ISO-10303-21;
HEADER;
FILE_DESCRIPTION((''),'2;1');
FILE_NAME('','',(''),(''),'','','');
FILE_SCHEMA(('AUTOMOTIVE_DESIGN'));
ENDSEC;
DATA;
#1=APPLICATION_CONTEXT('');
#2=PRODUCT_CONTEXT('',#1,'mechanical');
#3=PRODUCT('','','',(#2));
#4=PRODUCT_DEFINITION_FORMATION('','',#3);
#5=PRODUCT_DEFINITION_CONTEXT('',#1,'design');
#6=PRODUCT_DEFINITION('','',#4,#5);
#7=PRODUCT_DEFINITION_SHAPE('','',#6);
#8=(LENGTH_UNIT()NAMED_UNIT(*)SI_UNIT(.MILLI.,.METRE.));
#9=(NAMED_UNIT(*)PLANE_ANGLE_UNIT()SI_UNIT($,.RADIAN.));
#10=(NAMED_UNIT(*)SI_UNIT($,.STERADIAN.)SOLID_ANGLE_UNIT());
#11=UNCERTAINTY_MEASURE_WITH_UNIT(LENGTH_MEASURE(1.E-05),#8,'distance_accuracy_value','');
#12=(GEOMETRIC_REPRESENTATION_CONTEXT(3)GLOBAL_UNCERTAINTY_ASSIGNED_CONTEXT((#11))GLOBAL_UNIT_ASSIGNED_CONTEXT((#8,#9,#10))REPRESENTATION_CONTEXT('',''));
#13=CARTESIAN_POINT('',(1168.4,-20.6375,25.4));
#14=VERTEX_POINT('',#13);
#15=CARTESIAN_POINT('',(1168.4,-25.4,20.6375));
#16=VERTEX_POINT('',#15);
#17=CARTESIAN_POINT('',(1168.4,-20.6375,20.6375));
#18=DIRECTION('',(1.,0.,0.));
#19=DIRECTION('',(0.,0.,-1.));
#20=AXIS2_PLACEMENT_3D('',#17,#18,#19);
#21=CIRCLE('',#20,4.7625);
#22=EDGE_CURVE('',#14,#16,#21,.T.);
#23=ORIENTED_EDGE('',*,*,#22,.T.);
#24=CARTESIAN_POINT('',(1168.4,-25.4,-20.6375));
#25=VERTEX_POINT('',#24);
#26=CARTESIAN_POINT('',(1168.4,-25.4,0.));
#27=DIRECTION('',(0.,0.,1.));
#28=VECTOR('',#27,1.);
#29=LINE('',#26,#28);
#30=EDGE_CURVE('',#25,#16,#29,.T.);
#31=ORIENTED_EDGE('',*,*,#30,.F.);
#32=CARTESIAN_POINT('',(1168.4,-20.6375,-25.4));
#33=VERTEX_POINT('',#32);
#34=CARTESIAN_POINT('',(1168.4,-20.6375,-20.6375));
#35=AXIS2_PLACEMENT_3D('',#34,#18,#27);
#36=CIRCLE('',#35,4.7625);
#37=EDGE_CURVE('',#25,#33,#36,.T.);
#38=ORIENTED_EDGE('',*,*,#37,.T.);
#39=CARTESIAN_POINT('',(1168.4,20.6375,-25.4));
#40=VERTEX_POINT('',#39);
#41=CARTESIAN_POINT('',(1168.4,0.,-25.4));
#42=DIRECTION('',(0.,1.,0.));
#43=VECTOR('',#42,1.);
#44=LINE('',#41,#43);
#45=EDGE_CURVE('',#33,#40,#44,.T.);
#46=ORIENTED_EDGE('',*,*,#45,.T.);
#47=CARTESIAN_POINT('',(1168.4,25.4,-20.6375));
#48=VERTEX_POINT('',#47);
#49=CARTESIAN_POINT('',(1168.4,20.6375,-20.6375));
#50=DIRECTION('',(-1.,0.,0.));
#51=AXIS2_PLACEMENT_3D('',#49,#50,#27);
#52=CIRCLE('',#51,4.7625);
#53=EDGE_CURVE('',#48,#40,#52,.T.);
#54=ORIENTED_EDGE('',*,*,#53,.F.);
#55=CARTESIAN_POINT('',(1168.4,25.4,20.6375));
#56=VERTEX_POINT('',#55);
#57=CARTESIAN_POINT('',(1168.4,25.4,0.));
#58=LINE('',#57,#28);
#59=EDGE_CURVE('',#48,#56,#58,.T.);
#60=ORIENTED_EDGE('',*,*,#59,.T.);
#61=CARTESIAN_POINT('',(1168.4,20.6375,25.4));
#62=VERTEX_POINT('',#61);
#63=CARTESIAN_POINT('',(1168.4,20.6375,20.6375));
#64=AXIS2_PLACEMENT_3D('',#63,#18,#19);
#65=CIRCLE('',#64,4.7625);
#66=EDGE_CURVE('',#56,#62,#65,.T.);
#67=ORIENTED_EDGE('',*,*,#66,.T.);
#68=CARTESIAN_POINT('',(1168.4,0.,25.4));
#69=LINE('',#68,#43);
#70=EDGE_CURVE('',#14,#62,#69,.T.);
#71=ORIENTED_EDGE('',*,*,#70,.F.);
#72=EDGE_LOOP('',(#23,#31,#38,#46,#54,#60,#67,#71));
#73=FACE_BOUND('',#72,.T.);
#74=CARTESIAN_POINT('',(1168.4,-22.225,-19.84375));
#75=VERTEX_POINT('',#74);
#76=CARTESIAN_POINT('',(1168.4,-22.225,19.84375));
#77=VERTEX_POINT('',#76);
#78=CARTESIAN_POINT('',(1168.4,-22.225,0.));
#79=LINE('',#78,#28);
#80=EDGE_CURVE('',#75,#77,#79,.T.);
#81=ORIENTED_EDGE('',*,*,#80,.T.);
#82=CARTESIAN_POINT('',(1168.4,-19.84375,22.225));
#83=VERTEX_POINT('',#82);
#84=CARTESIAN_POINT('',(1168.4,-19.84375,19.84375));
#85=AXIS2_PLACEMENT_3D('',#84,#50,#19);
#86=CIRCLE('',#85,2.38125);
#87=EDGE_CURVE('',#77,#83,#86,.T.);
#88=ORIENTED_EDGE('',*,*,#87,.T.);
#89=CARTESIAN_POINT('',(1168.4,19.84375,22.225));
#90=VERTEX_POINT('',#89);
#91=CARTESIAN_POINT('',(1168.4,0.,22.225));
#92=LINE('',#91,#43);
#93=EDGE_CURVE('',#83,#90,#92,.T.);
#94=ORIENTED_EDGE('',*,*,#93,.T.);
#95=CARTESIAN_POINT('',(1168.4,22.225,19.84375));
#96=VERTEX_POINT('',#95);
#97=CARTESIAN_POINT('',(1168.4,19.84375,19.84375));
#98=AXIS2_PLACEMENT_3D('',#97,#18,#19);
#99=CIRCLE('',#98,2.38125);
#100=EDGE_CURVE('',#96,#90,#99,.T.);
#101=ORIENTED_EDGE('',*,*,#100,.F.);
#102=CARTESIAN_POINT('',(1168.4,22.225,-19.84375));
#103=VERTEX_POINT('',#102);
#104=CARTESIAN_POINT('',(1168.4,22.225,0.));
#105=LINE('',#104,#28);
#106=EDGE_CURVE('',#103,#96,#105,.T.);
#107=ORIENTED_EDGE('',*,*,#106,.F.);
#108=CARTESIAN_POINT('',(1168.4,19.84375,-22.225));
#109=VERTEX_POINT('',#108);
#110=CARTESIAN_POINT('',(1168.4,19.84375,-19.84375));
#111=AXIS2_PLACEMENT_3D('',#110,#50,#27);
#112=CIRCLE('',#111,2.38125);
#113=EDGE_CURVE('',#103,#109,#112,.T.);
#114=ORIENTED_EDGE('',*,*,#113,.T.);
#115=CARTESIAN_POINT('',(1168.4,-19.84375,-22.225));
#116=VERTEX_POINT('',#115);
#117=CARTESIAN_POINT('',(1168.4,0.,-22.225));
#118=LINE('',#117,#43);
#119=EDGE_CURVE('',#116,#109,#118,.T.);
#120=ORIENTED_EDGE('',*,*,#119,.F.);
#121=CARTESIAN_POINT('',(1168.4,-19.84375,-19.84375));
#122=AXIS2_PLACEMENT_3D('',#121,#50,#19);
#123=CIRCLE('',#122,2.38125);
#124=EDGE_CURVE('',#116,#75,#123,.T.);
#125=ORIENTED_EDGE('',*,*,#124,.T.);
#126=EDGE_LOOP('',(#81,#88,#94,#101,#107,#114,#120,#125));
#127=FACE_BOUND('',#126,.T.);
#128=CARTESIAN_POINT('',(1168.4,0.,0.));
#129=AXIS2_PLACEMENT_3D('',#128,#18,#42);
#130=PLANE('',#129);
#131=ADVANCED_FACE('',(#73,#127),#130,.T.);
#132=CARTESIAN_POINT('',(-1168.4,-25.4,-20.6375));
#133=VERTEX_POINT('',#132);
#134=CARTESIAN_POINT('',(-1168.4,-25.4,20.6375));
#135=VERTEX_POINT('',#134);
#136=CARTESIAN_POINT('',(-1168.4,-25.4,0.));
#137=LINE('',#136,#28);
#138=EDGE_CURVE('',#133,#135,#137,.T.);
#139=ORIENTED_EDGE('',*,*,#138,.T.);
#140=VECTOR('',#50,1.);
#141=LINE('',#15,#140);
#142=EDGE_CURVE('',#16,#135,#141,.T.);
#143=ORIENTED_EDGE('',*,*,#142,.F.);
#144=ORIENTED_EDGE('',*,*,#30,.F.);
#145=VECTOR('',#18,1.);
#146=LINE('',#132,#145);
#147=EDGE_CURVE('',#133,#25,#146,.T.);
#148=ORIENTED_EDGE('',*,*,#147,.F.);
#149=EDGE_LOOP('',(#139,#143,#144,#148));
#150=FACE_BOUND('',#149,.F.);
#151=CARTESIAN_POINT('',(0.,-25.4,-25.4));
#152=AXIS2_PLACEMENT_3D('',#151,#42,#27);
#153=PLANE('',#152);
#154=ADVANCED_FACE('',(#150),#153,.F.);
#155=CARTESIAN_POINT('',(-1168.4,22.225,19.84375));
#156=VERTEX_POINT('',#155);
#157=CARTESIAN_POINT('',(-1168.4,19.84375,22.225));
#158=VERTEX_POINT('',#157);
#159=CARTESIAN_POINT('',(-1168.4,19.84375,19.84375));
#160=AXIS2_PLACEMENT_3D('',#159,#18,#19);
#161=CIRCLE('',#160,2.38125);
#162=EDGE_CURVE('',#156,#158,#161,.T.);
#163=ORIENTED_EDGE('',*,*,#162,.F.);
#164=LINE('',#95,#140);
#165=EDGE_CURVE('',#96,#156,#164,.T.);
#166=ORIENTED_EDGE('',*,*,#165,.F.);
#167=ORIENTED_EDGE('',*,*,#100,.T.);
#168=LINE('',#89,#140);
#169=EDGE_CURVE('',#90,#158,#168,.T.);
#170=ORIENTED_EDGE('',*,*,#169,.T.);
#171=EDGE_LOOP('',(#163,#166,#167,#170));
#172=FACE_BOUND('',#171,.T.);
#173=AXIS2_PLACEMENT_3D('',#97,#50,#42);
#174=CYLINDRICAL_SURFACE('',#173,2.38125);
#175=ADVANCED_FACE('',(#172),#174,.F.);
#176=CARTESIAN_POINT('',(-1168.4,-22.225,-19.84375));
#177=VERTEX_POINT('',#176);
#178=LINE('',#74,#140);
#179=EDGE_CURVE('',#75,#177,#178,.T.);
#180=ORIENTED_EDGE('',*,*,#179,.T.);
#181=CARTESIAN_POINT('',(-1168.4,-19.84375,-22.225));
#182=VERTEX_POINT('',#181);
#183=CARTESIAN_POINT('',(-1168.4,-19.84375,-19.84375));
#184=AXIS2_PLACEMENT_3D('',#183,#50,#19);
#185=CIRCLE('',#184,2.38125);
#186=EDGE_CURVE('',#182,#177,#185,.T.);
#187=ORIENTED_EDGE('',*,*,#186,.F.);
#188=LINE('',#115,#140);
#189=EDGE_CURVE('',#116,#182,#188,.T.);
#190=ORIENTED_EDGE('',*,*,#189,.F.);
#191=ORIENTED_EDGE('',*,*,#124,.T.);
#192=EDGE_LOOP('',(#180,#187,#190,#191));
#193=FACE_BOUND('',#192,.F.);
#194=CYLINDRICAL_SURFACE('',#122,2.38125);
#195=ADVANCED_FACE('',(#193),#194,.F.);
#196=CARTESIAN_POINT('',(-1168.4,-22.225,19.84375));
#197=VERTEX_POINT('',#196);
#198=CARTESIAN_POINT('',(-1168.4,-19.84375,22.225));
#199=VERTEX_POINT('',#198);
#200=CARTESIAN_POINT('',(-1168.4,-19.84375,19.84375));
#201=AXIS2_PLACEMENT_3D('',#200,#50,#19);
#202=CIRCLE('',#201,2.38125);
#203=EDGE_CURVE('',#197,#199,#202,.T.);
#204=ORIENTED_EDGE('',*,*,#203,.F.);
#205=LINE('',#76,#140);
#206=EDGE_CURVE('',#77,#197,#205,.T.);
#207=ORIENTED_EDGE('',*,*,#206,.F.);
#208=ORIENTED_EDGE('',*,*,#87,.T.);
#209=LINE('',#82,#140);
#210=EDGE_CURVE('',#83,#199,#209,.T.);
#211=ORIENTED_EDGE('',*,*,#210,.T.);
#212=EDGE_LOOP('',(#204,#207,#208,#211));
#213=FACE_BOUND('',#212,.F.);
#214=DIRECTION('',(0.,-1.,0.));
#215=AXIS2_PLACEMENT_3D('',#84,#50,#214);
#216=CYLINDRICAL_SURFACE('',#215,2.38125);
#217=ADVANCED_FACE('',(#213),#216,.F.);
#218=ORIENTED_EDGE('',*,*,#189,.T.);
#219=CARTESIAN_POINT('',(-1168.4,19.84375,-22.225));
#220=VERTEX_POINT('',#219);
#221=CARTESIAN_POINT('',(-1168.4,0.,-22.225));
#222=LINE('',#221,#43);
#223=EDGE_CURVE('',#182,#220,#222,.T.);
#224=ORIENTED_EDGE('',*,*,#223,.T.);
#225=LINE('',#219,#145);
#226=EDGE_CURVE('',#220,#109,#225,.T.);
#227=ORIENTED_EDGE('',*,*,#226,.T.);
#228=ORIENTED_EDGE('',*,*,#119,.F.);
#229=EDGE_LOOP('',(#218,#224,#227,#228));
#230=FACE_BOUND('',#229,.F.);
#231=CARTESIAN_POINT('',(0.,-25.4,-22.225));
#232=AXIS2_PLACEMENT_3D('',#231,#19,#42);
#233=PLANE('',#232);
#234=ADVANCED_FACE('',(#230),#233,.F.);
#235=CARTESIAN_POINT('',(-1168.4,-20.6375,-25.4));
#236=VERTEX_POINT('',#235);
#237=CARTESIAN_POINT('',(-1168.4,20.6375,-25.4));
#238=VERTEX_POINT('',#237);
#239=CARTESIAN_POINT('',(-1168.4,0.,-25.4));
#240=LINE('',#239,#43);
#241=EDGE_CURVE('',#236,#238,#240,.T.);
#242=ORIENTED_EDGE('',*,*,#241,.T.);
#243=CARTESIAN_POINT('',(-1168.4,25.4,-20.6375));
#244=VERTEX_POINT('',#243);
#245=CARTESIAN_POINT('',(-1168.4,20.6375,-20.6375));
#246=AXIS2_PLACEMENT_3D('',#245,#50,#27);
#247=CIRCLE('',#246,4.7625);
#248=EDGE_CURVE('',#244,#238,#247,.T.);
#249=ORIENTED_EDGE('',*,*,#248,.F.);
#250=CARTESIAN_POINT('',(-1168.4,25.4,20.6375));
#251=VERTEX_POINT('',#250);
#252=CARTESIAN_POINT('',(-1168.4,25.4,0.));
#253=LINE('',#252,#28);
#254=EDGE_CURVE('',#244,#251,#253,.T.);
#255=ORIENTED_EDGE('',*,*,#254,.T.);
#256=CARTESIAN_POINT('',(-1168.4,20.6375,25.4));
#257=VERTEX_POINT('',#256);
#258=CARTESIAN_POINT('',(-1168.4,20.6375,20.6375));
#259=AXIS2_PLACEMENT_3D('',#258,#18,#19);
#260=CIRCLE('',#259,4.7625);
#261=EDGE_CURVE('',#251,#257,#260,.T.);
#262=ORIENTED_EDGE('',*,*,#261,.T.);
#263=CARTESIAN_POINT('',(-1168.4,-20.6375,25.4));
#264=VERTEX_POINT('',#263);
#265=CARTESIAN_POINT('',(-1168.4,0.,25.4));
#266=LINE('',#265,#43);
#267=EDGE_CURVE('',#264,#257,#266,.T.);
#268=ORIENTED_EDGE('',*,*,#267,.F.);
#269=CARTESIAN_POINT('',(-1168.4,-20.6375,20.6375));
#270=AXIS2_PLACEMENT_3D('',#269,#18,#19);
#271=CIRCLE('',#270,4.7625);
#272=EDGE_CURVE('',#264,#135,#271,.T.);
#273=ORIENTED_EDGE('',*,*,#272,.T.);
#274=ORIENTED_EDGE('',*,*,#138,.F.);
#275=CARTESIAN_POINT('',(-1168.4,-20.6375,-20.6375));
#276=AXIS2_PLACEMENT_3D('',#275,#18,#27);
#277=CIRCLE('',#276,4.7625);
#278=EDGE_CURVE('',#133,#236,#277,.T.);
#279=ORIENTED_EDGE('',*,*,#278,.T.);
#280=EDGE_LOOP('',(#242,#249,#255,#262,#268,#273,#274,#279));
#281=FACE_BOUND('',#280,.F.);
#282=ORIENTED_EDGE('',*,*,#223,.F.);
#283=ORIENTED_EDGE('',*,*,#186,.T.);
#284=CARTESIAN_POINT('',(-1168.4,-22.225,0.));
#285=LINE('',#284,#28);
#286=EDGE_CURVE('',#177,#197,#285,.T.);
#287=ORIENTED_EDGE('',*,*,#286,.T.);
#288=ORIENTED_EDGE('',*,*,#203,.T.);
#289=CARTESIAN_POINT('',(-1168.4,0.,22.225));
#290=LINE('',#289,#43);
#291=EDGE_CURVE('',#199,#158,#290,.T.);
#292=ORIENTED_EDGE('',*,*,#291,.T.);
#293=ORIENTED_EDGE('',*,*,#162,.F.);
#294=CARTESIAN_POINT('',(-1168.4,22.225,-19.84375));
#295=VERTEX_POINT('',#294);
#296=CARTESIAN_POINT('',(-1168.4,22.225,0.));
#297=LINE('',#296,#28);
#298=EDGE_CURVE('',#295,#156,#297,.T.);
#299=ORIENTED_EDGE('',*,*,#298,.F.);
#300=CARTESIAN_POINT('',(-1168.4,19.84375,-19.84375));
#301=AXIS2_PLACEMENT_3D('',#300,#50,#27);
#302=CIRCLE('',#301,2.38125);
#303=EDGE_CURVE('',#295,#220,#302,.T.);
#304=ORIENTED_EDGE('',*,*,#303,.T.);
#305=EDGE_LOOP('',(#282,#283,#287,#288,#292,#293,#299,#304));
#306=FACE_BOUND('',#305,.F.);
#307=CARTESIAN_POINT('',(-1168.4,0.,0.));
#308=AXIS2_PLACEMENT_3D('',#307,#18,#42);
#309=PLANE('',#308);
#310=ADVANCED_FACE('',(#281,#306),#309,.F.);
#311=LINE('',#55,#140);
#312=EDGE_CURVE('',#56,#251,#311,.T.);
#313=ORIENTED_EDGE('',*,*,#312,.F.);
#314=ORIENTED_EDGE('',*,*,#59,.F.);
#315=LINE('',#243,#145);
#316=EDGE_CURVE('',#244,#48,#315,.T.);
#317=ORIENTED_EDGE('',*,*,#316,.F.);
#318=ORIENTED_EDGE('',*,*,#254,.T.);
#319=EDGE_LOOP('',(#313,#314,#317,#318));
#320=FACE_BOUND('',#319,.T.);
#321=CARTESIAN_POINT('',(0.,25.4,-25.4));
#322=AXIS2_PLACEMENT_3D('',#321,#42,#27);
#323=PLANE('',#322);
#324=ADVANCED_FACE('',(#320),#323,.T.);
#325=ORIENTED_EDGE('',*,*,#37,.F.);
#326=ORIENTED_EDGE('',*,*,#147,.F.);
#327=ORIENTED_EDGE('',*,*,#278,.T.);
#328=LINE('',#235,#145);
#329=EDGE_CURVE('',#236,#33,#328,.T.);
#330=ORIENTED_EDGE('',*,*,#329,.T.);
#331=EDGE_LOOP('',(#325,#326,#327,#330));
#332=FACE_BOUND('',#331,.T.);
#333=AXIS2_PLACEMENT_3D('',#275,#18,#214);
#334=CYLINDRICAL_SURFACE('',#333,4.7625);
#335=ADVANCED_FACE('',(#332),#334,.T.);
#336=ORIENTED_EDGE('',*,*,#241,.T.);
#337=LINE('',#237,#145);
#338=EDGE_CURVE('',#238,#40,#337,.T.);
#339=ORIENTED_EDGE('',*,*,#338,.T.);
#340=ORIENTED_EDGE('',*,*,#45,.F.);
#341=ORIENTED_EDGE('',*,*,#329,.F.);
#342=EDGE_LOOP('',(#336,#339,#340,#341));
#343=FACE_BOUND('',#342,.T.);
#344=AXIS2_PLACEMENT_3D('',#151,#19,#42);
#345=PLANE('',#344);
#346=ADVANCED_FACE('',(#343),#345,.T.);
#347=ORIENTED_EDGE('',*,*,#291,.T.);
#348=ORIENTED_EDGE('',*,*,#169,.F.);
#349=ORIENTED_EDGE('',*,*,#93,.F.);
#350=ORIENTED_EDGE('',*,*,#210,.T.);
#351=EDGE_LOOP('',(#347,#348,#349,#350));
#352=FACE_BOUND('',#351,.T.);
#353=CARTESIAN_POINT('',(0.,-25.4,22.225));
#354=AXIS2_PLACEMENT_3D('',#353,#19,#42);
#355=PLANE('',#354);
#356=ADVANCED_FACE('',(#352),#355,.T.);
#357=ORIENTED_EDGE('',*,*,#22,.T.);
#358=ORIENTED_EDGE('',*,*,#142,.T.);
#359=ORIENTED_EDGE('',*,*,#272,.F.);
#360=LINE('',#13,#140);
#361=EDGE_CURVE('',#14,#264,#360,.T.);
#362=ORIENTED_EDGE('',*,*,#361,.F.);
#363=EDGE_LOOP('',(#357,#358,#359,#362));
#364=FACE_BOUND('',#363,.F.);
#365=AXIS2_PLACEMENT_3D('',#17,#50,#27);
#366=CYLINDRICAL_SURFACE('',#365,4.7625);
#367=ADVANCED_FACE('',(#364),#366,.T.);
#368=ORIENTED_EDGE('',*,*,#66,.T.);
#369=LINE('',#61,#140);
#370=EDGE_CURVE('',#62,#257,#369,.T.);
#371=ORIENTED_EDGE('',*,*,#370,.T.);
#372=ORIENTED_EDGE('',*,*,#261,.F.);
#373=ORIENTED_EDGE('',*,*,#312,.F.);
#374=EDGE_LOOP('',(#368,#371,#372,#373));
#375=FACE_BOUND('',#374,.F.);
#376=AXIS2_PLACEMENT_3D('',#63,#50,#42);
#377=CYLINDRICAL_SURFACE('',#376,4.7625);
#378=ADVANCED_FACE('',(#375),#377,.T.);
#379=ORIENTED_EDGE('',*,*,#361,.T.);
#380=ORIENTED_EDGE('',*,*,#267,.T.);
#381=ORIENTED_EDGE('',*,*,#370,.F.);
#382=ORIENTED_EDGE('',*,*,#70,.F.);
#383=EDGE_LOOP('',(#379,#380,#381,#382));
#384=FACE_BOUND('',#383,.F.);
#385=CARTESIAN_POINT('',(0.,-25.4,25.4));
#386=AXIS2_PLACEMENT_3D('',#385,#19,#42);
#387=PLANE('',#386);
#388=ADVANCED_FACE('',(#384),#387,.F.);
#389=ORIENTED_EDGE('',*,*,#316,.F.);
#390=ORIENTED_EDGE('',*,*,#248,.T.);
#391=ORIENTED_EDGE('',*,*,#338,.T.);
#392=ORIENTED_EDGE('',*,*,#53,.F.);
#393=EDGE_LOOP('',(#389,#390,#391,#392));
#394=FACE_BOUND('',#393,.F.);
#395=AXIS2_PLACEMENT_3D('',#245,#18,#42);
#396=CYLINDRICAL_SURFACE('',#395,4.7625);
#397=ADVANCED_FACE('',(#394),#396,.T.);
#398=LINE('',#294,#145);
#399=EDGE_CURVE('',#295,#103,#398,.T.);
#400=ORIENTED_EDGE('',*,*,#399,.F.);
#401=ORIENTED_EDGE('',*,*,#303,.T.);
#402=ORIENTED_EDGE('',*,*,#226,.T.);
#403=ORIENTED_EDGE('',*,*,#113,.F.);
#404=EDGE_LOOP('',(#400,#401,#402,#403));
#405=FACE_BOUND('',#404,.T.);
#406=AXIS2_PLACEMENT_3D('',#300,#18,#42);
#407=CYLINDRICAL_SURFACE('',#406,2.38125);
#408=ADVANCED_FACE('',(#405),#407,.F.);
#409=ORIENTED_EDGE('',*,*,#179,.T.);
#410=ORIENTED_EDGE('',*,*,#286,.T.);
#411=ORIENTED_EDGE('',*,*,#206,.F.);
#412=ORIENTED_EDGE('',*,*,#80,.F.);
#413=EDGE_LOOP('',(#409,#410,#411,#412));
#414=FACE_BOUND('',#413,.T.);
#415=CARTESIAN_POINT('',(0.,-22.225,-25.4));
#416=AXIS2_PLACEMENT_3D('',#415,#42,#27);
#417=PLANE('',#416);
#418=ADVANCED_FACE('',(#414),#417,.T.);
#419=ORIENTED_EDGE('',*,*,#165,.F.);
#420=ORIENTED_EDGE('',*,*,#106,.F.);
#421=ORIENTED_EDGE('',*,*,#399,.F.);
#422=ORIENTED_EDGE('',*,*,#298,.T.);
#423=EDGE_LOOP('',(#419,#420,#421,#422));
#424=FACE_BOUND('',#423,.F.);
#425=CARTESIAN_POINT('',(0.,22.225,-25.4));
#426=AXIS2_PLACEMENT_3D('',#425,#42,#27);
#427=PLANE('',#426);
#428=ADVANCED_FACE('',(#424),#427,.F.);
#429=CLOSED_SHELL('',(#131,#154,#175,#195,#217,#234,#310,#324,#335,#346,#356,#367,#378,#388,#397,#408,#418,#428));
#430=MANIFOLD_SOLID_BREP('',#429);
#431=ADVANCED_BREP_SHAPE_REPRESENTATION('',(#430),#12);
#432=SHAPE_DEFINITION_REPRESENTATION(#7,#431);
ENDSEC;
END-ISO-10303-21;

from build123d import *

# Parameters (mm, degrees)
F0_W     = 50.8
F0_H     = 50.8
F1_DEPTH = 1168.4
F2_T     = -3.175
F3_R     = 4.7625
F4_R     = 2.38125


with BuildPart() as f1:
    # F0 (on Right) → F1 (new body, symmetric)
    with BuildSketch(Plane.YZ):
        Rectangle(F0_W, F0_H)
    extrude(amount=F1_DEPTH, both=True)

    # F2
    f2_openings = [f1.faces().sort_by_distance(p)[0] for p in [
        (1168.4, 0, 0),
        (-1168.4, 0, 0),
    ]]
    offset(amount=F2_T, openings=f2_openings)

    # F3
    f3_edges = [f1.edges().sort_by_distance(p)[0] for p in [
        (0, 25.4, 25.4),
        (0, -25.4, 25.4),
        (0, 25.4, -25.4),
        (0, -25.4, -25.4),
    ]]
    fillet(f3_edges, radius=F3_R)

    # F4
    f4_edges = [f1.edges().sort_by_distance(p)[0] for p in [
        (0, -22.225, 22.225),
        (0, -22.225, -22.225),
        (0, 22.225, -22.225),
        (0, 22.225, 22.225),
    ]]
    fillet(f4_edges, radius=F4_R)


solid = f1.part
